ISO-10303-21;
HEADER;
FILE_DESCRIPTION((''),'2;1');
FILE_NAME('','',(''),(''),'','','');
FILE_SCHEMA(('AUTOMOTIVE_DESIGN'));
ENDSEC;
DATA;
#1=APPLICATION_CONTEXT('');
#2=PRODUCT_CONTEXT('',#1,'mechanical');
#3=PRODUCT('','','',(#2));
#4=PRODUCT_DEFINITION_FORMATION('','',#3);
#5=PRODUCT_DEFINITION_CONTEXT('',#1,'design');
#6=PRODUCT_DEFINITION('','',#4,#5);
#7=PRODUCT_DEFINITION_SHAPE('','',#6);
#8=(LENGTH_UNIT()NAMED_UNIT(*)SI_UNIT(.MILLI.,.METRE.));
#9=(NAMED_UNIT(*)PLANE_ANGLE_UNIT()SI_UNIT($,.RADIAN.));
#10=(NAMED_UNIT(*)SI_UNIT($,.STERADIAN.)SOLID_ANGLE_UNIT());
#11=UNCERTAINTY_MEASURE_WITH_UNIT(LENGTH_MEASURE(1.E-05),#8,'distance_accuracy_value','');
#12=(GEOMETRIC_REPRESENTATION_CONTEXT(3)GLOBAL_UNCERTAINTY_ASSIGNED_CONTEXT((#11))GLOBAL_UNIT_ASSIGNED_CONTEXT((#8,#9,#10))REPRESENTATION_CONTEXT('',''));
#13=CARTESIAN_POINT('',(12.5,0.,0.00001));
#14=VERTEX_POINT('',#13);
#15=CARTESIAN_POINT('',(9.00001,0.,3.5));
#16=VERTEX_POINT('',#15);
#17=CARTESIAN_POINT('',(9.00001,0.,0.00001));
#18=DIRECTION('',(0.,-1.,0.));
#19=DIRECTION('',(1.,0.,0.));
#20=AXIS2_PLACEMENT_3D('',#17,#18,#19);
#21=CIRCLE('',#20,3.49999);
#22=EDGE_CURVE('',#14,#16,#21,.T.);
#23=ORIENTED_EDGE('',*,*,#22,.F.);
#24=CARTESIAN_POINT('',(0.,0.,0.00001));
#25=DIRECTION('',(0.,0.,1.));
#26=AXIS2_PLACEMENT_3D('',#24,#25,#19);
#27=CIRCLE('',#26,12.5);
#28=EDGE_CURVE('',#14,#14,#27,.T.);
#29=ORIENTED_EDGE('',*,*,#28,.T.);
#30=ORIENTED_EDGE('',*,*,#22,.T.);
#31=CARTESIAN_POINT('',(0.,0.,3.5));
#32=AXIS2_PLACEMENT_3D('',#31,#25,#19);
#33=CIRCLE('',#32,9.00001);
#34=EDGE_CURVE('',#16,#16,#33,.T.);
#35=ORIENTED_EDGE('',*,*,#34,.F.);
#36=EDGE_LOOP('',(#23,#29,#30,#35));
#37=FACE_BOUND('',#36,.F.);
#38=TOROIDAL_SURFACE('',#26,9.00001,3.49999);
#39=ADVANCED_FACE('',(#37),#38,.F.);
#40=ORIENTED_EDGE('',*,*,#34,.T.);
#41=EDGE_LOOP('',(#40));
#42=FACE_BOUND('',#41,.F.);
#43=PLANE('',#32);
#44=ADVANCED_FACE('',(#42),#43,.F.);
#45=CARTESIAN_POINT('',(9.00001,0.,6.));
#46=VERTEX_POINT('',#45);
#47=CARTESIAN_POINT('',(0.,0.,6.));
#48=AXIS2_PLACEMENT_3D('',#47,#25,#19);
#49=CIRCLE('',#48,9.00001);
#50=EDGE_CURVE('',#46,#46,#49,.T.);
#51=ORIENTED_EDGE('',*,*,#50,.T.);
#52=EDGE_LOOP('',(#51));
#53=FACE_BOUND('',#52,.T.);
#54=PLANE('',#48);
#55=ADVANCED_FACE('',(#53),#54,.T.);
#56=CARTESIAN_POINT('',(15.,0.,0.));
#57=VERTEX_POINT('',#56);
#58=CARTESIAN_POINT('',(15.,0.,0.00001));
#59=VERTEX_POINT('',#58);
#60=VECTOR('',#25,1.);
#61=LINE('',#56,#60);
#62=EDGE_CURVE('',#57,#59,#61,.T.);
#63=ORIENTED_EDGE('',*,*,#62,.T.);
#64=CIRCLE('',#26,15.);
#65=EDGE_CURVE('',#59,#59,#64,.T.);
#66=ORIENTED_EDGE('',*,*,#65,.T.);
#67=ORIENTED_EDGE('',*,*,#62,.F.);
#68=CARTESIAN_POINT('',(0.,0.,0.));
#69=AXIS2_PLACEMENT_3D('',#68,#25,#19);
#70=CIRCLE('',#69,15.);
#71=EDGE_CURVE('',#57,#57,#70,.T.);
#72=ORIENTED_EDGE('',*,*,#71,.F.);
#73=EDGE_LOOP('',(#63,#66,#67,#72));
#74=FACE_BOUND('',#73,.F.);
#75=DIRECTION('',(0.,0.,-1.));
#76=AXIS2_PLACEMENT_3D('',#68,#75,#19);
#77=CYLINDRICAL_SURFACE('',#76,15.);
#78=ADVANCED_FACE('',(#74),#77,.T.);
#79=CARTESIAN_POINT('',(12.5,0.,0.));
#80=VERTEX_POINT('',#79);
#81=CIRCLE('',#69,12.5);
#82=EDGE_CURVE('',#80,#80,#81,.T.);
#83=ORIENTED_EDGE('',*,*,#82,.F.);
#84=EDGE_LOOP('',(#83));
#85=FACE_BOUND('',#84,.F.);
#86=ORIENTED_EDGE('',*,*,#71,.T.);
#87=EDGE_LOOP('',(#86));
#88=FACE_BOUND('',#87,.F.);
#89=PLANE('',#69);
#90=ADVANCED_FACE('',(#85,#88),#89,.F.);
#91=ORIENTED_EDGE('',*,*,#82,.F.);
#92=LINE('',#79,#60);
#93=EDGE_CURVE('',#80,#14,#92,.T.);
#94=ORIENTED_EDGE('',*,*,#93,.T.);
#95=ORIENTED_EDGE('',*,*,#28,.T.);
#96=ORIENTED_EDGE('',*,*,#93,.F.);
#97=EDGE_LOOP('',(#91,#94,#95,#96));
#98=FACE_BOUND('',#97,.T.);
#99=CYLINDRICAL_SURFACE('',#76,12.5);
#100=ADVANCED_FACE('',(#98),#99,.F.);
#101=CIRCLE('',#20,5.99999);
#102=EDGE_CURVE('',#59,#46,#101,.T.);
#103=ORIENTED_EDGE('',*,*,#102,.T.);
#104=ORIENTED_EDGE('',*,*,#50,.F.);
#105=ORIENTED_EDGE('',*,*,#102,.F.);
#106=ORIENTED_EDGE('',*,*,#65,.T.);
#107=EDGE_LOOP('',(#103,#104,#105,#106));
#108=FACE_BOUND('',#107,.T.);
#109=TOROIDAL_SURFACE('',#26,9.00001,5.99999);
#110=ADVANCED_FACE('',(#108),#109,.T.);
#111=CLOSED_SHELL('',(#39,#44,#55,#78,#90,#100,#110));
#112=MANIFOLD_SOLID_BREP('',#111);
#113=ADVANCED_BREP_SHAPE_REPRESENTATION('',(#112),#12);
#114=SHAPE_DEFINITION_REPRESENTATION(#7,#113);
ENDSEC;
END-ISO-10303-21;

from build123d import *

# Parameters (mm, degrees)
F0_R     = 15
F1_DEPTH = 6
F2_R     = 5.99999
F3_T     = 2.5


# Not quite as in the source:
# - a fillet or chamfer is up to 0.001 mm smaller than in the source, because OpenCascade refuses the exact size
# - a shell that OpenCascade refuses in one call is made with other operations: the cavity is built on its own and cut out


with BuildPart() as f1:
    # F0 (on Top) → F1 (new body)
    with BuildSketch(Plane.XY):
        Circle(F0_R)
    extrude(amount=F1_DEPTH)

    # F2 (radius 6 in the source; OpenCascade refuses exactly that, so slightly less here)
    f2_edges = [f1.edges().sort_by_distance(p)[0] for p in [
        (-15, 0, 6),
    ]]
    fillet(f2_edges, radius=F2_R)

    # F3: shell of thickness 2.5, made by hand


with BuildPart() as f3_core1:
    # F3_t2: copy of F1
    add(f1.part)

    # the walls: a layer under each face that stays
    f3_faces = [f3_core1.faces().sort_by_distance(p)[0] for p in [
        (-15, 0, 5e-06),
        (-13.2426436161, 0, 4.2426436161),
        (0, 0, 6),
    ]]
    thicken(f3_faces, amount=-F3_T, mode=Mode.SUBTRACT)


with BuildPart() as f1_1:
    add(f1.part)

    # what is left inside the walls is the cavity
    f3_cavity = [f3_core1.part.solids().sort_by_distance(p)[0] for p in [
        (0, -4.166667, 0.025),
    ]]
    add(f3_cavity, mode=Mode.SUBTRACT)


solid = f1_1.part
